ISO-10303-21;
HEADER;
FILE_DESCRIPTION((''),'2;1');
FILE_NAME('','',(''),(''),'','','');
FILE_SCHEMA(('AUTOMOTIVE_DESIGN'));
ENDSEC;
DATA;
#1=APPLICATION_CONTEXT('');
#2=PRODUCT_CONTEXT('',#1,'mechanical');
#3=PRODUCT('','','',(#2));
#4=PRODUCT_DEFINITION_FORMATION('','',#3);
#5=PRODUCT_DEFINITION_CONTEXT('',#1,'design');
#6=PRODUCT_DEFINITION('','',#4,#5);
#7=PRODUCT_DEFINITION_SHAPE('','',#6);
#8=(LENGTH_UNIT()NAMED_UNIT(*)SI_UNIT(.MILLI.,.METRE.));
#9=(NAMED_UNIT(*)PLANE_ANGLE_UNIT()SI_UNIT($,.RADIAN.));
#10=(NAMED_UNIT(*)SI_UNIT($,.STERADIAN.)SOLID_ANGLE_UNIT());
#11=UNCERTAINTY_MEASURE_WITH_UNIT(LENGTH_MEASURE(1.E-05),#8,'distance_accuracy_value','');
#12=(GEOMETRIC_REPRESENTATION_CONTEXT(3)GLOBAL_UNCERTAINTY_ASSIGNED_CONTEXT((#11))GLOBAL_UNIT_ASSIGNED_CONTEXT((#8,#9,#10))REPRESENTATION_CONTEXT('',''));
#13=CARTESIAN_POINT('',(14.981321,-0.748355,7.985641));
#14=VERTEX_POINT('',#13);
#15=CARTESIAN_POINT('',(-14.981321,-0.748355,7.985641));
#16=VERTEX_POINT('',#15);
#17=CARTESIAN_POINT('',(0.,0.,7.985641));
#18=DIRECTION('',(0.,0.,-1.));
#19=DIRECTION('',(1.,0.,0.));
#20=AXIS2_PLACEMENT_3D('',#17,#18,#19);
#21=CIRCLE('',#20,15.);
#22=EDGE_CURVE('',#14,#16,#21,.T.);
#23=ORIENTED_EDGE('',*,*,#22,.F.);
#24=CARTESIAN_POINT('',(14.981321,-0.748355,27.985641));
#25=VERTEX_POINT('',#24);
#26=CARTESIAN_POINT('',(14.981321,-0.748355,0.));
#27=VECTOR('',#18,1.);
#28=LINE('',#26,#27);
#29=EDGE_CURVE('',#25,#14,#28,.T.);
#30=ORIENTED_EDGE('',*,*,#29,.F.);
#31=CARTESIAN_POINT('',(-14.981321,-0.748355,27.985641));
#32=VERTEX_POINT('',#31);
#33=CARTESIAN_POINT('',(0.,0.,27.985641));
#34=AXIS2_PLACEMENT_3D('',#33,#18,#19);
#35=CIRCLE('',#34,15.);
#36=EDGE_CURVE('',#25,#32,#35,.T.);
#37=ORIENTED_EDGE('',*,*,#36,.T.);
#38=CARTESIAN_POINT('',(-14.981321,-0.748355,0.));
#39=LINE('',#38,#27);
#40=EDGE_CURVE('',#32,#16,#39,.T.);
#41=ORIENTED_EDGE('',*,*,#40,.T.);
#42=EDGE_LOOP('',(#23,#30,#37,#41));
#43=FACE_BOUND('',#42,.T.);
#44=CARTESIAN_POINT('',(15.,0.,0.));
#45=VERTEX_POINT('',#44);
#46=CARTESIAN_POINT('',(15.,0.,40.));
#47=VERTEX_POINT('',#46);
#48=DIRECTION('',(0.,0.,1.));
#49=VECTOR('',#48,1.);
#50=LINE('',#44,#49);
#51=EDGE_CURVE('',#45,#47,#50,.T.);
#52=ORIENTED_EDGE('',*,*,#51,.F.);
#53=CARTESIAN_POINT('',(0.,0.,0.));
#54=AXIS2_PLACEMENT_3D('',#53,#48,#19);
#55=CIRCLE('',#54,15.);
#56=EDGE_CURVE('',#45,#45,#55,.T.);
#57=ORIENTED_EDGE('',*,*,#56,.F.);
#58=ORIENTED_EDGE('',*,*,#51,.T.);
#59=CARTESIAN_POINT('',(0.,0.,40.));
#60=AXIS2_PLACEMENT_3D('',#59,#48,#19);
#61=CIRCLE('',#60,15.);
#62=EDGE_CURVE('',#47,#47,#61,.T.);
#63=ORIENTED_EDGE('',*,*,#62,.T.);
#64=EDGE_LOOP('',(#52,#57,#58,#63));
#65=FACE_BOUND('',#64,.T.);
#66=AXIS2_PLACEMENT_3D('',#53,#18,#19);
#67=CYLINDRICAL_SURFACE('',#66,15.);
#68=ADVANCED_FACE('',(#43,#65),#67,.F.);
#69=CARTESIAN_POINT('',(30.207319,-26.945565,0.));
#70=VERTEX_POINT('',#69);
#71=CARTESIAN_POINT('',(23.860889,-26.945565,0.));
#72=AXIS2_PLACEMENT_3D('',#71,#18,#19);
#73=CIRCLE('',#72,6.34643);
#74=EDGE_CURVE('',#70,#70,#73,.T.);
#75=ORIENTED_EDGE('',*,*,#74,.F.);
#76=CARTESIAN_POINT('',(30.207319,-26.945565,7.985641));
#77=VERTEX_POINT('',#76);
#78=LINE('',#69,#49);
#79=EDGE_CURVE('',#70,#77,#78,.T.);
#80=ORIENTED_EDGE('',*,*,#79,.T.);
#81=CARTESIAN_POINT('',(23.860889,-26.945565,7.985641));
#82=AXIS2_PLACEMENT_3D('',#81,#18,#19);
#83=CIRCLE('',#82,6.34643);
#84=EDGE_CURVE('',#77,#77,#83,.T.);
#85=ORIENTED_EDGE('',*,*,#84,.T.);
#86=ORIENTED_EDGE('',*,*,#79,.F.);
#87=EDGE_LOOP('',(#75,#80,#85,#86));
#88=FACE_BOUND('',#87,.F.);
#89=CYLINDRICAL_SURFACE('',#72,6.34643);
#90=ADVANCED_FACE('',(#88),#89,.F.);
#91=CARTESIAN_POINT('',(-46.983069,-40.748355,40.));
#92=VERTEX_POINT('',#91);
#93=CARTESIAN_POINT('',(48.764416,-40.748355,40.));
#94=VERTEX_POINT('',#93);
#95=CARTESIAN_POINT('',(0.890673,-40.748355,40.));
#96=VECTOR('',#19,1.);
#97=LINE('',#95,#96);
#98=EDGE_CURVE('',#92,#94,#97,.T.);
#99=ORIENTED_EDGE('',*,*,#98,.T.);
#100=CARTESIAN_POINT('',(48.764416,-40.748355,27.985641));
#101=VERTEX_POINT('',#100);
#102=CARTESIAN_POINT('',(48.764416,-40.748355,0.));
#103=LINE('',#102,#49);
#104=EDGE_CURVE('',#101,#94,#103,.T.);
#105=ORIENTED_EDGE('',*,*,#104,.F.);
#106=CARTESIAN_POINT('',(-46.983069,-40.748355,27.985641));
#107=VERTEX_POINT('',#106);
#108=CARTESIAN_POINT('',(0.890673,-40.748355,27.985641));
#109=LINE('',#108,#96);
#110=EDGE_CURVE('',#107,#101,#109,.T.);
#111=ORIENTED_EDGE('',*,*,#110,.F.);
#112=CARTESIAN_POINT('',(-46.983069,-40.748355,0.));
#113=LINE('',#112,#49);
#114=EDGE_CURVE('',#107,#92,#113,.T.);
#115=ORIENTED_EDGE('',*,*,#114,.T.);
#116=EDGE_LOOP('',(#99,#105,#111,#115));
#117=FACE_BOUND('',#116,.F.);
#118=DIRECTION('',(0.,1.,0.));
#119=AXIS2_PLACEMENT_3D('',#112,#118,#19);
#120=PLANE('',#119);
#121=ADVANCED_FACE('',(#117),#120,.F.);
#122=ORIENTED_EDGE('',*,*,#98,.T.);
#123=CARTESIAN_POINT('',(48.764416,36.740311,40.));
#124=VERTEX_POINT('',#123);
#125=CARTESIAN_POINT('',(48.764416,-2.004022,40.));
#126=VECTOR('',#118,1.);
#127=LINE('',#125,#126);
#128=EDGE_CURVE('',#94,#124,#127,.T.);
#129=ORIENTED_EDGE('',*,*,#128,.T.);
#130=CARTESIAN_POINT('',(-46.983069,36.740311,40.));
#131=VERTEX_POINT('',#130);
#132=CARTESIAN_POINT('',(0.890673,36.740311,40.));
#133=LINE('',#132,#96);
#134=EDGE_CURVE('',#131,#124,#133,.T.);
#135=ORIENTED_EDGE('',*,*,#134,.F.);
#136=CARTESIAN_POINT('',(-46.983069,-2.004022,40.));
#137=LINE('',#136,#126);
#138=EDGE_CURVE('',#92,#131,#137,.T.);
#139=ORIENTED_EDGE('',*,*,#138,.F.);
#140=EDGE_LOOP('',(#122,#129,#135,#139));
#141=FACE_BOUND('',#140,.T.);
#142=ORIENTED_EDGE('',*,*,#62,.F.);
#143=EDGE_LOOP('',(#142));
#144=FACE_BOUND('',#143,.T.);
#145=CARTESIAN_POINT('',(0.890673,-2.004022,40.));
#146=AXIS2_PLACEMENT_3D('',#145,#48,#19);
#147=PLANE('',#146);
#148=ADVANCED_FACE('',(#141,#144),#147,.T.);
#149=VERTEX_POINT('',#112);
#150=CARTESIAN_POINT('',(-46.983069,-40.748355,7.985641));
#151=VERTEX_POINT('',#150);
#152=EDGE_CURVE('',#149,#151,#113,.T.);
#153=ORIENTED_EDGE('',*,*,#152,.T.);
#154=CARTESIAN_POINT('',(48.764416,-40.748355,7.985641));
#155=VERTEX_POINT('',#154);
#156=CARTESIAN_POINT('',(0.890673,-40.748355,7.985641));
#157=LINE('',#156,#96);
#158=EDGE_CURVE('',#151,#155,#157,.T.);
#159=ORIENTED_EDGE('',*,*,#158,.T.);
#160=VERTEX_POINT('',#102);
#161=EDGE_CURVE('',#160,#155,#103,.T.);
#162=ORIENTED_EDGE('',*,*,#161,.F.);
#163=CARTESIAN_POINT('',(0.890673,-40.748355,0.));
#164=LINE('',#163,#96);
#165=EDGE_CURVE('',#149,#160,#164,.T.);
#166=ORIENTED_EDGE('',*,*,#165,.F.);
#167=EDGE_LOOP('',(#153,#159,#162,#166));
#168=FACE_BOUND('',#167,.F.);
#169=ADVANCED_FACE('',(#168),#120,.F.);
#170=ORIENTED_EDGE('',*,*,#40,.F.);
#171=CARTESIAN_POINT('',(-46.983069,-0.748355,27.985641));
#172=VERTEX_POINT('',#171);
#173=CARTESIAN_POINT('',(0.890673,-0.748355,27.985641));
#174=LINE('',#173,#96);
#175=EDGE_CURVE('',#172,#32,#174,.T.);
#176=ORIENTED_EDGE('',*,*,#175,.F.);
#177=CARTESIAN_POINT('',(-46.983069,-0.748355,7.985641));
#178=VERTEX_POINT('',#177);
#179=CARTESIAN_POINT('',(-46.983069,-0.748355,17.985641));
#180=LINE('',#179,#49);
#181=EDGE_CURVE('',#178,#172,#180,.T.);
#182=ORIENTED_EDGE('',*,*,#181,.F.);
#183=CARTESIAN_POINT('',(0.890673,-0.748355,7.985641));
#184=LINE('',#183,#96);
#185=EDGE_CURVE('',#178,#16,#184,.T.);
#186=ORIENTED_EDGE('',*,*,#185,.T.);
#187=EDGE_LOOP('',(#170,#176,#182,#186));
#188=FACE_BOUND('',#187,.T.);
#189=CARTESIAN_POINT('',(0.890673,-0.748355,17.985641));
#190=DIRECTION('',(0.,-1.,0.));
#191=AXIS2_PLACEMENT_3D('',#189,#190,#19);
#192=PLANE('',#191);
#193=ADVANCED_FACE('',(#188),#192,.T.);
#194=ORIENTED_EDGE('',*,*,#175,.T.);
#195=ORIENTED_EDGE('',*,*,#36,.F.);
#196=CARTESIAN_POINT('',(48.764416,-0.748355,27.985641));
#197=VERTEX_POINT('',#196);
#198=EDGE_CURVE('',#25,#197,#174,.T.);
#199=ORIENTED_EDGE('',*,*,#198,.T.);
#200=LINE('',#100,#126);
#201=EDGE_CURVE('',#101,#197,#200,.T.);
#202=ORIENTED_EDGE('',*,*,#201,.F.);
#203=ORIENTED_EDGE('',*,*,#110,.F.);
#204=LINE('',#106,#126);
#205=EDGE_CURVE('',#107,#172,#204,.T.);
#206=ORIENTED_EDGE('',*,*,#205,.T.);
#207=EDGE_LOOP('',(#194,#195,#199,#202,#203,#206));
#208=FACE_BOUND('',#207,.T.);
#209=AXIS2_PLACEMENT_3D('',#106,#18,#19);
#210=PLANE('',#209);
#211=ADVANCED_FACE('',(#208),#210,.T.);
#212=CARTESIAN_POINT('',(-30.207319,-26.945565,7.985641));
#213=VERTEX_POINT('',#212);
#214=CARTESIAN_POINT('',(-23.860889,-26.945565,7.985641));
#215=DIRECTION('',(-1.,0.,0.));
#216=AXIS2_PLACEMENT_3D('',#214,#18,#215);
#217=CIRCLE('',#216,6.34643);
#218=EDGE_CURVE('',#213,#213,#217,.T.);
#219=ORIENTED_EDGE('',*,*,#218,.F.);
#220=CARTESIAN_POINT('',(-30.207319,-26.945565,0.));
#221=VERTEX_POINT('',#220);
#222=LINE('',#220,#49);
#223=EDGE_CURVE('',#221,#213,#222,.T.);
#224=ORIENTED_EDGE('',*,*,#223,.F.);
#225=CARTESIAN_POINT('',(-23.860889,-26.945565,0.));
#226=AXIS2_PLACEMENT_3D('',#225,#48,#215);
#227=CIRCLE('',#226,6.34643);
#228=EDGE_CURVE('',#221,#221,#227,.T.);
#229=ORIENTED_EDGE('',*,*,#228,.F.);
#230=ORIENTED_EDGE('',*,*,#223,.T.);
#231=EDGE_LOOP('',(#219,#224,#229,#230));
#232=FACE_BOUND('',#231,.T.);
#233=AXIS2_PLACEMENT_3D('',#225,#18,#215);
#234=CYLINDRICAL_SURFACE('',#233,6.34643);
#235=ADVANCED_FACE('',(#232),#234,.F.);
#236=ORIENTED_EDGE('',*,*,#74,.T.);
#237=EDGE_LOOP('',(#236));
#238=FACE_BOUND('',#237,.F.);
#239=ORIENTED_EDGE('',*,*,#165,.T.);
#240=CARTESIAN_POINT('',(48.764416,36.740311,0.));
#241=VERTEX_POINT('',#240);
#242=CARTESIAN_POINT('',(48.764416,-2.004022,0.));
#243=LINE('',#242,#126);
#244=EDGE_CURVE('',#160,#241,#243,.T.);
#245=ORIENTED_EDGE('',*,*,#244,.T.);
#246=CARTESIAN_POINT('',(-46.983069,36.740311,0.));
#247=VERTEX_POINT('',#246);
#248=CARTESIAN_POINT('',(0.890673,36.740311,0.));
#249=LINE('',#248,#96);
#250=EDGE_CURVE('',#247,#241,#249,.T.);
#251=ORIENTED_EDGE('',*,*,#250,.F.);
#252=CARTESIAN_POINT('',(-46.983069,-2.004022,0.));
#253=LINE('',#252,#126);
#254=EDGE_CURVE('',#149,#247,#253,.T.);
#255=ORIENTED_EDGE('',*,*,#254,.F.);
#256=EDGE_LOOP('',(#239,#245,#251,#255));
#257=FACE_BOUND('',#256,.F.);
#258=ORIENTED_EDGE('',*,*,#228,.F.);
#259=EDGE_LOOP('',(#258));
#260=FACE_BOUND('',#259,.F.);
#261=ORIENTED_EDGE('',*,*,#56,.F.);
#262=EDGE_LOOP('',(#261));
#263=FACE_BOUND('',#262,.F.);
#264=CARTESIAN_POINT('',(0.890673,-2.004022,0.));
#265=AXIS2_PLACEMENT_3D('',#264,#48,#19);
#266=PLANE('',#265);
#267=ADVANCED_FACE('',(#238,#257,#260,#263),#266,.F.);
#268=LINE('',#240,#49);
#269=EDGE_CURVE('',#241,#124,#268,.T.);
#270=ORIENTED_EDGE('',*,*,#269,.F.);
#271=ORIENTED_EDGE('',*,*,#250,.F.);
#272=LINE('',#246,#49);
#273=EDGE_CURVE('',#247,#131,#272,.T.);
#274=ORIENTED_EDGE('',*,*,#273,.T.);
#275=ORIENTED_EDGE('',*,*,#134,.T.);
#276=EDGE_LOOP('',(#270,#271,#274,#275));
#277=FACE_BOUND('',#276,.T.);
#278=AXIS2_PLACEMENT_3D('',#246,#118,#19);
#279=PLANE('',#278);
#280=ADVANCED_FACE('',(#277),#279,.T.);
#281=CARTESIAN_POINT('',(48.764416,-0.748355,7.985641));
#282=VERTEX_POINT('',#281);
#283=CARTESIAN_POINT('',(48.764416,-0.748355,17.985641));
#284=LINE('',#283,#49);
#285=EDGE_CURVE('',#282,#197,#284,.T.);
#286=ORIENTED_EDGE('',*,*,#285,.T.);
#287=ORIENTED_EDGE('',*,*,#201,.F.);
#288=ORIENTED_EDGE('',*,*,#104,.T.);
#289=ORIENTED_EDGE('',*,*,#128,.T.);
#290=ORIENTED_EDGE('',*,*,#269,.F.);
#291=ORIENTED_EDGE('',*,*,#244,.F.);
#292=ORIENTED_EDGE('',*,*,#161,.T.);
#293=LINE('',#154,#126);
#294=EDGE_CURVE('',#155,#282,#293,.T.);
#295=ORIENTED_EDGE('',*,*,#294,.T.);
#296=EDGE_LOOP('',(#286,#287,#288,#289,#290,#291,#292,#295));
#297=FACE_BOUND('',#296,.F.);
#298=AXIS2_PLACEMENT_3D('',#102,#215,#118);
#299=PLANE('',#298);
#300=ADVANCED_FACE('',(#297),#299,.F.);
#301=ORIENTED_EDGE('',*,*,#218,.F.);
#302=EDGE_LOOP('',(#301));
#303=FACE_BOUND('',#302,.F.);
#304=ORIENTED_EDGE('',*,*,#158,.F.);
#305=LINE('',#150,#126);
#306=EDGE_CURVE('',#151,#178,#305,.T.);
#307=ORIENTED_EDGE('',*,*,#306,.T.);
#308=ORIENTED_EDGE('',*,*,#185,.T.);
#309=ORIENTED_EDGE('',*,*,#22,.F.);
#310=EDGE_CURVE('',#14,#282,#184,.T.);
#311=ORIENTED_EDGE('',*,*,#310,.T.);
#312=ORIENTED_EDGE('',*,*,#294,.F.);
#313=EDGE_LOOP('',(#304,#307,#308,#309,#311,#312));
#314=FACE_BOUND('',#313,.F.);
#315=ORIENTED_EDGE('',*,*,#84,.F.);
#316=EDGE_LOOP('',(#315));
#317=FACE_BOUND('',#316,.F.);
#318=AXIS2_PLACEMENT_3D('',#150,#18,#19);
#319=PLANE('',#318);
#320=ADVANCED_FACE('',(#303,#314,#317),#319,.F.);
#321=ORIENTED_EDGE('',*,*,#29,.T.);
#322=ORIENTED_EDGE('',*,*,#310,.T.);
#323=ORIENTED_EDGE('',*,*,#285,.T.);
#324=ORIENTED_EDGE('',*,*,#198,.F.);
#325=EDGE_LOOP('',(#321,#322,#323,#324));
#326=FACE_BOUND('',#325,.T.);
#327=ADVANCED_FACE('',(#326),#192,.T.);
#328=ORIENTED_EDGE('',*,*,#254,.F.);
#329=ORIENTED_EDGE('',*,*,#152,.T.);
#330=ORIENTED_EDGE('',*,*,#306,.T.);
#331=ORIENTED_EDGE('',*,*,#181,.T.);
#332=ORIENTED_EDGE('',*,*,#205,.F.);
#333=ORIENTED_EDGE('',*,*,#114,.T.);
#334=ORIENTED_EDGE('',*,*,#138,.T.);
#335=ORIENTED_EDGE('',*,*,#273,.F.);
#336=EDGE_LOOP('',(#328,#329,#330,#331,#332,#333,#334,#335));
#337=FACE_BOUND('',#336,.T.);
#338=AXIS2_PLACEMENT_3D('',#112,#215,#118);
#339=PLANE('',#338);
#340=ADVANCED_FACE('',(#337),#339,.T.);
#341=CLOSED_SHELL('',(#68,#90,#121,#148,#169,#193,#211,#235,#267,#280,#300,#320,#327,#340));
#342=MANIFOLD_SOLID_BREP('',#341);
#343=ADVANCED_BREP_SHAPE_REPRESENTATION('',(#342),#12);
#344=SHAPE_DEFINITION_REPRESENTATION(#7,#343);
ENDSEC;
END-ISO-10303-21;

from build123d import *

# Parameters (mm, degrees)
F0_W     = 95.7474842701
F0_H     = 77.4886654093
F0_R     = 15
F1_DEPTH = 40
F2_W     = 95.7474842701
F2_H     = 20
F3_DEPTH = 40
F4_R     = 6.3464300443
F5_DEPTH = 25


# Not quite as in the source:
# - a pattern or mirror of a feature is missing from the dataset's text; its kind, count and spacing are read off the source's solid


with BuildPart() as f1:
    # F0 (on Top) → F1 (new body)
    with BuildSketch(Plane.XY):
        with Locations((0.8906734218, -2.0040220562)):
            Rectangle(F0_W, F0_H)
        Circle(F0_R, mode=Mode.SUBTRACT)
    extrude(amount=F1_DEPTH)

    # F2 (on face) → F3 (cut)
    with BuildSketch(Plane.XZ.offset(40.7483547609)):
        with Locations((0.8906734218, 17.9856412485)):
            Rectangle(F2_W, F2_H)
    extrude(amount=-F3_DEPTH, mode=Mode.SUBTRACT)

    # F4 (on face) → F5 (cut)
    with BuildSketch(Plane(origin=(0, 0, 0), x_dir=(1, 0, 0), z_dir=(0, 0, -1))):
        with Locations((23.8608885556, 26.9455648959)):
            Circle(F4_R)
    f5 = extrude(amount=-F5_DEPTH, mode=Mode.SUBTRACT)

    # F5_copies: F5 across plane
    add(f5.mirror(Plane(origin=(0, 0, 0), x_dir=(0, 0, -1), z_dir=(-1, 0, 0))), mode=Mode.SUBTRACT)


solid = f1.part
